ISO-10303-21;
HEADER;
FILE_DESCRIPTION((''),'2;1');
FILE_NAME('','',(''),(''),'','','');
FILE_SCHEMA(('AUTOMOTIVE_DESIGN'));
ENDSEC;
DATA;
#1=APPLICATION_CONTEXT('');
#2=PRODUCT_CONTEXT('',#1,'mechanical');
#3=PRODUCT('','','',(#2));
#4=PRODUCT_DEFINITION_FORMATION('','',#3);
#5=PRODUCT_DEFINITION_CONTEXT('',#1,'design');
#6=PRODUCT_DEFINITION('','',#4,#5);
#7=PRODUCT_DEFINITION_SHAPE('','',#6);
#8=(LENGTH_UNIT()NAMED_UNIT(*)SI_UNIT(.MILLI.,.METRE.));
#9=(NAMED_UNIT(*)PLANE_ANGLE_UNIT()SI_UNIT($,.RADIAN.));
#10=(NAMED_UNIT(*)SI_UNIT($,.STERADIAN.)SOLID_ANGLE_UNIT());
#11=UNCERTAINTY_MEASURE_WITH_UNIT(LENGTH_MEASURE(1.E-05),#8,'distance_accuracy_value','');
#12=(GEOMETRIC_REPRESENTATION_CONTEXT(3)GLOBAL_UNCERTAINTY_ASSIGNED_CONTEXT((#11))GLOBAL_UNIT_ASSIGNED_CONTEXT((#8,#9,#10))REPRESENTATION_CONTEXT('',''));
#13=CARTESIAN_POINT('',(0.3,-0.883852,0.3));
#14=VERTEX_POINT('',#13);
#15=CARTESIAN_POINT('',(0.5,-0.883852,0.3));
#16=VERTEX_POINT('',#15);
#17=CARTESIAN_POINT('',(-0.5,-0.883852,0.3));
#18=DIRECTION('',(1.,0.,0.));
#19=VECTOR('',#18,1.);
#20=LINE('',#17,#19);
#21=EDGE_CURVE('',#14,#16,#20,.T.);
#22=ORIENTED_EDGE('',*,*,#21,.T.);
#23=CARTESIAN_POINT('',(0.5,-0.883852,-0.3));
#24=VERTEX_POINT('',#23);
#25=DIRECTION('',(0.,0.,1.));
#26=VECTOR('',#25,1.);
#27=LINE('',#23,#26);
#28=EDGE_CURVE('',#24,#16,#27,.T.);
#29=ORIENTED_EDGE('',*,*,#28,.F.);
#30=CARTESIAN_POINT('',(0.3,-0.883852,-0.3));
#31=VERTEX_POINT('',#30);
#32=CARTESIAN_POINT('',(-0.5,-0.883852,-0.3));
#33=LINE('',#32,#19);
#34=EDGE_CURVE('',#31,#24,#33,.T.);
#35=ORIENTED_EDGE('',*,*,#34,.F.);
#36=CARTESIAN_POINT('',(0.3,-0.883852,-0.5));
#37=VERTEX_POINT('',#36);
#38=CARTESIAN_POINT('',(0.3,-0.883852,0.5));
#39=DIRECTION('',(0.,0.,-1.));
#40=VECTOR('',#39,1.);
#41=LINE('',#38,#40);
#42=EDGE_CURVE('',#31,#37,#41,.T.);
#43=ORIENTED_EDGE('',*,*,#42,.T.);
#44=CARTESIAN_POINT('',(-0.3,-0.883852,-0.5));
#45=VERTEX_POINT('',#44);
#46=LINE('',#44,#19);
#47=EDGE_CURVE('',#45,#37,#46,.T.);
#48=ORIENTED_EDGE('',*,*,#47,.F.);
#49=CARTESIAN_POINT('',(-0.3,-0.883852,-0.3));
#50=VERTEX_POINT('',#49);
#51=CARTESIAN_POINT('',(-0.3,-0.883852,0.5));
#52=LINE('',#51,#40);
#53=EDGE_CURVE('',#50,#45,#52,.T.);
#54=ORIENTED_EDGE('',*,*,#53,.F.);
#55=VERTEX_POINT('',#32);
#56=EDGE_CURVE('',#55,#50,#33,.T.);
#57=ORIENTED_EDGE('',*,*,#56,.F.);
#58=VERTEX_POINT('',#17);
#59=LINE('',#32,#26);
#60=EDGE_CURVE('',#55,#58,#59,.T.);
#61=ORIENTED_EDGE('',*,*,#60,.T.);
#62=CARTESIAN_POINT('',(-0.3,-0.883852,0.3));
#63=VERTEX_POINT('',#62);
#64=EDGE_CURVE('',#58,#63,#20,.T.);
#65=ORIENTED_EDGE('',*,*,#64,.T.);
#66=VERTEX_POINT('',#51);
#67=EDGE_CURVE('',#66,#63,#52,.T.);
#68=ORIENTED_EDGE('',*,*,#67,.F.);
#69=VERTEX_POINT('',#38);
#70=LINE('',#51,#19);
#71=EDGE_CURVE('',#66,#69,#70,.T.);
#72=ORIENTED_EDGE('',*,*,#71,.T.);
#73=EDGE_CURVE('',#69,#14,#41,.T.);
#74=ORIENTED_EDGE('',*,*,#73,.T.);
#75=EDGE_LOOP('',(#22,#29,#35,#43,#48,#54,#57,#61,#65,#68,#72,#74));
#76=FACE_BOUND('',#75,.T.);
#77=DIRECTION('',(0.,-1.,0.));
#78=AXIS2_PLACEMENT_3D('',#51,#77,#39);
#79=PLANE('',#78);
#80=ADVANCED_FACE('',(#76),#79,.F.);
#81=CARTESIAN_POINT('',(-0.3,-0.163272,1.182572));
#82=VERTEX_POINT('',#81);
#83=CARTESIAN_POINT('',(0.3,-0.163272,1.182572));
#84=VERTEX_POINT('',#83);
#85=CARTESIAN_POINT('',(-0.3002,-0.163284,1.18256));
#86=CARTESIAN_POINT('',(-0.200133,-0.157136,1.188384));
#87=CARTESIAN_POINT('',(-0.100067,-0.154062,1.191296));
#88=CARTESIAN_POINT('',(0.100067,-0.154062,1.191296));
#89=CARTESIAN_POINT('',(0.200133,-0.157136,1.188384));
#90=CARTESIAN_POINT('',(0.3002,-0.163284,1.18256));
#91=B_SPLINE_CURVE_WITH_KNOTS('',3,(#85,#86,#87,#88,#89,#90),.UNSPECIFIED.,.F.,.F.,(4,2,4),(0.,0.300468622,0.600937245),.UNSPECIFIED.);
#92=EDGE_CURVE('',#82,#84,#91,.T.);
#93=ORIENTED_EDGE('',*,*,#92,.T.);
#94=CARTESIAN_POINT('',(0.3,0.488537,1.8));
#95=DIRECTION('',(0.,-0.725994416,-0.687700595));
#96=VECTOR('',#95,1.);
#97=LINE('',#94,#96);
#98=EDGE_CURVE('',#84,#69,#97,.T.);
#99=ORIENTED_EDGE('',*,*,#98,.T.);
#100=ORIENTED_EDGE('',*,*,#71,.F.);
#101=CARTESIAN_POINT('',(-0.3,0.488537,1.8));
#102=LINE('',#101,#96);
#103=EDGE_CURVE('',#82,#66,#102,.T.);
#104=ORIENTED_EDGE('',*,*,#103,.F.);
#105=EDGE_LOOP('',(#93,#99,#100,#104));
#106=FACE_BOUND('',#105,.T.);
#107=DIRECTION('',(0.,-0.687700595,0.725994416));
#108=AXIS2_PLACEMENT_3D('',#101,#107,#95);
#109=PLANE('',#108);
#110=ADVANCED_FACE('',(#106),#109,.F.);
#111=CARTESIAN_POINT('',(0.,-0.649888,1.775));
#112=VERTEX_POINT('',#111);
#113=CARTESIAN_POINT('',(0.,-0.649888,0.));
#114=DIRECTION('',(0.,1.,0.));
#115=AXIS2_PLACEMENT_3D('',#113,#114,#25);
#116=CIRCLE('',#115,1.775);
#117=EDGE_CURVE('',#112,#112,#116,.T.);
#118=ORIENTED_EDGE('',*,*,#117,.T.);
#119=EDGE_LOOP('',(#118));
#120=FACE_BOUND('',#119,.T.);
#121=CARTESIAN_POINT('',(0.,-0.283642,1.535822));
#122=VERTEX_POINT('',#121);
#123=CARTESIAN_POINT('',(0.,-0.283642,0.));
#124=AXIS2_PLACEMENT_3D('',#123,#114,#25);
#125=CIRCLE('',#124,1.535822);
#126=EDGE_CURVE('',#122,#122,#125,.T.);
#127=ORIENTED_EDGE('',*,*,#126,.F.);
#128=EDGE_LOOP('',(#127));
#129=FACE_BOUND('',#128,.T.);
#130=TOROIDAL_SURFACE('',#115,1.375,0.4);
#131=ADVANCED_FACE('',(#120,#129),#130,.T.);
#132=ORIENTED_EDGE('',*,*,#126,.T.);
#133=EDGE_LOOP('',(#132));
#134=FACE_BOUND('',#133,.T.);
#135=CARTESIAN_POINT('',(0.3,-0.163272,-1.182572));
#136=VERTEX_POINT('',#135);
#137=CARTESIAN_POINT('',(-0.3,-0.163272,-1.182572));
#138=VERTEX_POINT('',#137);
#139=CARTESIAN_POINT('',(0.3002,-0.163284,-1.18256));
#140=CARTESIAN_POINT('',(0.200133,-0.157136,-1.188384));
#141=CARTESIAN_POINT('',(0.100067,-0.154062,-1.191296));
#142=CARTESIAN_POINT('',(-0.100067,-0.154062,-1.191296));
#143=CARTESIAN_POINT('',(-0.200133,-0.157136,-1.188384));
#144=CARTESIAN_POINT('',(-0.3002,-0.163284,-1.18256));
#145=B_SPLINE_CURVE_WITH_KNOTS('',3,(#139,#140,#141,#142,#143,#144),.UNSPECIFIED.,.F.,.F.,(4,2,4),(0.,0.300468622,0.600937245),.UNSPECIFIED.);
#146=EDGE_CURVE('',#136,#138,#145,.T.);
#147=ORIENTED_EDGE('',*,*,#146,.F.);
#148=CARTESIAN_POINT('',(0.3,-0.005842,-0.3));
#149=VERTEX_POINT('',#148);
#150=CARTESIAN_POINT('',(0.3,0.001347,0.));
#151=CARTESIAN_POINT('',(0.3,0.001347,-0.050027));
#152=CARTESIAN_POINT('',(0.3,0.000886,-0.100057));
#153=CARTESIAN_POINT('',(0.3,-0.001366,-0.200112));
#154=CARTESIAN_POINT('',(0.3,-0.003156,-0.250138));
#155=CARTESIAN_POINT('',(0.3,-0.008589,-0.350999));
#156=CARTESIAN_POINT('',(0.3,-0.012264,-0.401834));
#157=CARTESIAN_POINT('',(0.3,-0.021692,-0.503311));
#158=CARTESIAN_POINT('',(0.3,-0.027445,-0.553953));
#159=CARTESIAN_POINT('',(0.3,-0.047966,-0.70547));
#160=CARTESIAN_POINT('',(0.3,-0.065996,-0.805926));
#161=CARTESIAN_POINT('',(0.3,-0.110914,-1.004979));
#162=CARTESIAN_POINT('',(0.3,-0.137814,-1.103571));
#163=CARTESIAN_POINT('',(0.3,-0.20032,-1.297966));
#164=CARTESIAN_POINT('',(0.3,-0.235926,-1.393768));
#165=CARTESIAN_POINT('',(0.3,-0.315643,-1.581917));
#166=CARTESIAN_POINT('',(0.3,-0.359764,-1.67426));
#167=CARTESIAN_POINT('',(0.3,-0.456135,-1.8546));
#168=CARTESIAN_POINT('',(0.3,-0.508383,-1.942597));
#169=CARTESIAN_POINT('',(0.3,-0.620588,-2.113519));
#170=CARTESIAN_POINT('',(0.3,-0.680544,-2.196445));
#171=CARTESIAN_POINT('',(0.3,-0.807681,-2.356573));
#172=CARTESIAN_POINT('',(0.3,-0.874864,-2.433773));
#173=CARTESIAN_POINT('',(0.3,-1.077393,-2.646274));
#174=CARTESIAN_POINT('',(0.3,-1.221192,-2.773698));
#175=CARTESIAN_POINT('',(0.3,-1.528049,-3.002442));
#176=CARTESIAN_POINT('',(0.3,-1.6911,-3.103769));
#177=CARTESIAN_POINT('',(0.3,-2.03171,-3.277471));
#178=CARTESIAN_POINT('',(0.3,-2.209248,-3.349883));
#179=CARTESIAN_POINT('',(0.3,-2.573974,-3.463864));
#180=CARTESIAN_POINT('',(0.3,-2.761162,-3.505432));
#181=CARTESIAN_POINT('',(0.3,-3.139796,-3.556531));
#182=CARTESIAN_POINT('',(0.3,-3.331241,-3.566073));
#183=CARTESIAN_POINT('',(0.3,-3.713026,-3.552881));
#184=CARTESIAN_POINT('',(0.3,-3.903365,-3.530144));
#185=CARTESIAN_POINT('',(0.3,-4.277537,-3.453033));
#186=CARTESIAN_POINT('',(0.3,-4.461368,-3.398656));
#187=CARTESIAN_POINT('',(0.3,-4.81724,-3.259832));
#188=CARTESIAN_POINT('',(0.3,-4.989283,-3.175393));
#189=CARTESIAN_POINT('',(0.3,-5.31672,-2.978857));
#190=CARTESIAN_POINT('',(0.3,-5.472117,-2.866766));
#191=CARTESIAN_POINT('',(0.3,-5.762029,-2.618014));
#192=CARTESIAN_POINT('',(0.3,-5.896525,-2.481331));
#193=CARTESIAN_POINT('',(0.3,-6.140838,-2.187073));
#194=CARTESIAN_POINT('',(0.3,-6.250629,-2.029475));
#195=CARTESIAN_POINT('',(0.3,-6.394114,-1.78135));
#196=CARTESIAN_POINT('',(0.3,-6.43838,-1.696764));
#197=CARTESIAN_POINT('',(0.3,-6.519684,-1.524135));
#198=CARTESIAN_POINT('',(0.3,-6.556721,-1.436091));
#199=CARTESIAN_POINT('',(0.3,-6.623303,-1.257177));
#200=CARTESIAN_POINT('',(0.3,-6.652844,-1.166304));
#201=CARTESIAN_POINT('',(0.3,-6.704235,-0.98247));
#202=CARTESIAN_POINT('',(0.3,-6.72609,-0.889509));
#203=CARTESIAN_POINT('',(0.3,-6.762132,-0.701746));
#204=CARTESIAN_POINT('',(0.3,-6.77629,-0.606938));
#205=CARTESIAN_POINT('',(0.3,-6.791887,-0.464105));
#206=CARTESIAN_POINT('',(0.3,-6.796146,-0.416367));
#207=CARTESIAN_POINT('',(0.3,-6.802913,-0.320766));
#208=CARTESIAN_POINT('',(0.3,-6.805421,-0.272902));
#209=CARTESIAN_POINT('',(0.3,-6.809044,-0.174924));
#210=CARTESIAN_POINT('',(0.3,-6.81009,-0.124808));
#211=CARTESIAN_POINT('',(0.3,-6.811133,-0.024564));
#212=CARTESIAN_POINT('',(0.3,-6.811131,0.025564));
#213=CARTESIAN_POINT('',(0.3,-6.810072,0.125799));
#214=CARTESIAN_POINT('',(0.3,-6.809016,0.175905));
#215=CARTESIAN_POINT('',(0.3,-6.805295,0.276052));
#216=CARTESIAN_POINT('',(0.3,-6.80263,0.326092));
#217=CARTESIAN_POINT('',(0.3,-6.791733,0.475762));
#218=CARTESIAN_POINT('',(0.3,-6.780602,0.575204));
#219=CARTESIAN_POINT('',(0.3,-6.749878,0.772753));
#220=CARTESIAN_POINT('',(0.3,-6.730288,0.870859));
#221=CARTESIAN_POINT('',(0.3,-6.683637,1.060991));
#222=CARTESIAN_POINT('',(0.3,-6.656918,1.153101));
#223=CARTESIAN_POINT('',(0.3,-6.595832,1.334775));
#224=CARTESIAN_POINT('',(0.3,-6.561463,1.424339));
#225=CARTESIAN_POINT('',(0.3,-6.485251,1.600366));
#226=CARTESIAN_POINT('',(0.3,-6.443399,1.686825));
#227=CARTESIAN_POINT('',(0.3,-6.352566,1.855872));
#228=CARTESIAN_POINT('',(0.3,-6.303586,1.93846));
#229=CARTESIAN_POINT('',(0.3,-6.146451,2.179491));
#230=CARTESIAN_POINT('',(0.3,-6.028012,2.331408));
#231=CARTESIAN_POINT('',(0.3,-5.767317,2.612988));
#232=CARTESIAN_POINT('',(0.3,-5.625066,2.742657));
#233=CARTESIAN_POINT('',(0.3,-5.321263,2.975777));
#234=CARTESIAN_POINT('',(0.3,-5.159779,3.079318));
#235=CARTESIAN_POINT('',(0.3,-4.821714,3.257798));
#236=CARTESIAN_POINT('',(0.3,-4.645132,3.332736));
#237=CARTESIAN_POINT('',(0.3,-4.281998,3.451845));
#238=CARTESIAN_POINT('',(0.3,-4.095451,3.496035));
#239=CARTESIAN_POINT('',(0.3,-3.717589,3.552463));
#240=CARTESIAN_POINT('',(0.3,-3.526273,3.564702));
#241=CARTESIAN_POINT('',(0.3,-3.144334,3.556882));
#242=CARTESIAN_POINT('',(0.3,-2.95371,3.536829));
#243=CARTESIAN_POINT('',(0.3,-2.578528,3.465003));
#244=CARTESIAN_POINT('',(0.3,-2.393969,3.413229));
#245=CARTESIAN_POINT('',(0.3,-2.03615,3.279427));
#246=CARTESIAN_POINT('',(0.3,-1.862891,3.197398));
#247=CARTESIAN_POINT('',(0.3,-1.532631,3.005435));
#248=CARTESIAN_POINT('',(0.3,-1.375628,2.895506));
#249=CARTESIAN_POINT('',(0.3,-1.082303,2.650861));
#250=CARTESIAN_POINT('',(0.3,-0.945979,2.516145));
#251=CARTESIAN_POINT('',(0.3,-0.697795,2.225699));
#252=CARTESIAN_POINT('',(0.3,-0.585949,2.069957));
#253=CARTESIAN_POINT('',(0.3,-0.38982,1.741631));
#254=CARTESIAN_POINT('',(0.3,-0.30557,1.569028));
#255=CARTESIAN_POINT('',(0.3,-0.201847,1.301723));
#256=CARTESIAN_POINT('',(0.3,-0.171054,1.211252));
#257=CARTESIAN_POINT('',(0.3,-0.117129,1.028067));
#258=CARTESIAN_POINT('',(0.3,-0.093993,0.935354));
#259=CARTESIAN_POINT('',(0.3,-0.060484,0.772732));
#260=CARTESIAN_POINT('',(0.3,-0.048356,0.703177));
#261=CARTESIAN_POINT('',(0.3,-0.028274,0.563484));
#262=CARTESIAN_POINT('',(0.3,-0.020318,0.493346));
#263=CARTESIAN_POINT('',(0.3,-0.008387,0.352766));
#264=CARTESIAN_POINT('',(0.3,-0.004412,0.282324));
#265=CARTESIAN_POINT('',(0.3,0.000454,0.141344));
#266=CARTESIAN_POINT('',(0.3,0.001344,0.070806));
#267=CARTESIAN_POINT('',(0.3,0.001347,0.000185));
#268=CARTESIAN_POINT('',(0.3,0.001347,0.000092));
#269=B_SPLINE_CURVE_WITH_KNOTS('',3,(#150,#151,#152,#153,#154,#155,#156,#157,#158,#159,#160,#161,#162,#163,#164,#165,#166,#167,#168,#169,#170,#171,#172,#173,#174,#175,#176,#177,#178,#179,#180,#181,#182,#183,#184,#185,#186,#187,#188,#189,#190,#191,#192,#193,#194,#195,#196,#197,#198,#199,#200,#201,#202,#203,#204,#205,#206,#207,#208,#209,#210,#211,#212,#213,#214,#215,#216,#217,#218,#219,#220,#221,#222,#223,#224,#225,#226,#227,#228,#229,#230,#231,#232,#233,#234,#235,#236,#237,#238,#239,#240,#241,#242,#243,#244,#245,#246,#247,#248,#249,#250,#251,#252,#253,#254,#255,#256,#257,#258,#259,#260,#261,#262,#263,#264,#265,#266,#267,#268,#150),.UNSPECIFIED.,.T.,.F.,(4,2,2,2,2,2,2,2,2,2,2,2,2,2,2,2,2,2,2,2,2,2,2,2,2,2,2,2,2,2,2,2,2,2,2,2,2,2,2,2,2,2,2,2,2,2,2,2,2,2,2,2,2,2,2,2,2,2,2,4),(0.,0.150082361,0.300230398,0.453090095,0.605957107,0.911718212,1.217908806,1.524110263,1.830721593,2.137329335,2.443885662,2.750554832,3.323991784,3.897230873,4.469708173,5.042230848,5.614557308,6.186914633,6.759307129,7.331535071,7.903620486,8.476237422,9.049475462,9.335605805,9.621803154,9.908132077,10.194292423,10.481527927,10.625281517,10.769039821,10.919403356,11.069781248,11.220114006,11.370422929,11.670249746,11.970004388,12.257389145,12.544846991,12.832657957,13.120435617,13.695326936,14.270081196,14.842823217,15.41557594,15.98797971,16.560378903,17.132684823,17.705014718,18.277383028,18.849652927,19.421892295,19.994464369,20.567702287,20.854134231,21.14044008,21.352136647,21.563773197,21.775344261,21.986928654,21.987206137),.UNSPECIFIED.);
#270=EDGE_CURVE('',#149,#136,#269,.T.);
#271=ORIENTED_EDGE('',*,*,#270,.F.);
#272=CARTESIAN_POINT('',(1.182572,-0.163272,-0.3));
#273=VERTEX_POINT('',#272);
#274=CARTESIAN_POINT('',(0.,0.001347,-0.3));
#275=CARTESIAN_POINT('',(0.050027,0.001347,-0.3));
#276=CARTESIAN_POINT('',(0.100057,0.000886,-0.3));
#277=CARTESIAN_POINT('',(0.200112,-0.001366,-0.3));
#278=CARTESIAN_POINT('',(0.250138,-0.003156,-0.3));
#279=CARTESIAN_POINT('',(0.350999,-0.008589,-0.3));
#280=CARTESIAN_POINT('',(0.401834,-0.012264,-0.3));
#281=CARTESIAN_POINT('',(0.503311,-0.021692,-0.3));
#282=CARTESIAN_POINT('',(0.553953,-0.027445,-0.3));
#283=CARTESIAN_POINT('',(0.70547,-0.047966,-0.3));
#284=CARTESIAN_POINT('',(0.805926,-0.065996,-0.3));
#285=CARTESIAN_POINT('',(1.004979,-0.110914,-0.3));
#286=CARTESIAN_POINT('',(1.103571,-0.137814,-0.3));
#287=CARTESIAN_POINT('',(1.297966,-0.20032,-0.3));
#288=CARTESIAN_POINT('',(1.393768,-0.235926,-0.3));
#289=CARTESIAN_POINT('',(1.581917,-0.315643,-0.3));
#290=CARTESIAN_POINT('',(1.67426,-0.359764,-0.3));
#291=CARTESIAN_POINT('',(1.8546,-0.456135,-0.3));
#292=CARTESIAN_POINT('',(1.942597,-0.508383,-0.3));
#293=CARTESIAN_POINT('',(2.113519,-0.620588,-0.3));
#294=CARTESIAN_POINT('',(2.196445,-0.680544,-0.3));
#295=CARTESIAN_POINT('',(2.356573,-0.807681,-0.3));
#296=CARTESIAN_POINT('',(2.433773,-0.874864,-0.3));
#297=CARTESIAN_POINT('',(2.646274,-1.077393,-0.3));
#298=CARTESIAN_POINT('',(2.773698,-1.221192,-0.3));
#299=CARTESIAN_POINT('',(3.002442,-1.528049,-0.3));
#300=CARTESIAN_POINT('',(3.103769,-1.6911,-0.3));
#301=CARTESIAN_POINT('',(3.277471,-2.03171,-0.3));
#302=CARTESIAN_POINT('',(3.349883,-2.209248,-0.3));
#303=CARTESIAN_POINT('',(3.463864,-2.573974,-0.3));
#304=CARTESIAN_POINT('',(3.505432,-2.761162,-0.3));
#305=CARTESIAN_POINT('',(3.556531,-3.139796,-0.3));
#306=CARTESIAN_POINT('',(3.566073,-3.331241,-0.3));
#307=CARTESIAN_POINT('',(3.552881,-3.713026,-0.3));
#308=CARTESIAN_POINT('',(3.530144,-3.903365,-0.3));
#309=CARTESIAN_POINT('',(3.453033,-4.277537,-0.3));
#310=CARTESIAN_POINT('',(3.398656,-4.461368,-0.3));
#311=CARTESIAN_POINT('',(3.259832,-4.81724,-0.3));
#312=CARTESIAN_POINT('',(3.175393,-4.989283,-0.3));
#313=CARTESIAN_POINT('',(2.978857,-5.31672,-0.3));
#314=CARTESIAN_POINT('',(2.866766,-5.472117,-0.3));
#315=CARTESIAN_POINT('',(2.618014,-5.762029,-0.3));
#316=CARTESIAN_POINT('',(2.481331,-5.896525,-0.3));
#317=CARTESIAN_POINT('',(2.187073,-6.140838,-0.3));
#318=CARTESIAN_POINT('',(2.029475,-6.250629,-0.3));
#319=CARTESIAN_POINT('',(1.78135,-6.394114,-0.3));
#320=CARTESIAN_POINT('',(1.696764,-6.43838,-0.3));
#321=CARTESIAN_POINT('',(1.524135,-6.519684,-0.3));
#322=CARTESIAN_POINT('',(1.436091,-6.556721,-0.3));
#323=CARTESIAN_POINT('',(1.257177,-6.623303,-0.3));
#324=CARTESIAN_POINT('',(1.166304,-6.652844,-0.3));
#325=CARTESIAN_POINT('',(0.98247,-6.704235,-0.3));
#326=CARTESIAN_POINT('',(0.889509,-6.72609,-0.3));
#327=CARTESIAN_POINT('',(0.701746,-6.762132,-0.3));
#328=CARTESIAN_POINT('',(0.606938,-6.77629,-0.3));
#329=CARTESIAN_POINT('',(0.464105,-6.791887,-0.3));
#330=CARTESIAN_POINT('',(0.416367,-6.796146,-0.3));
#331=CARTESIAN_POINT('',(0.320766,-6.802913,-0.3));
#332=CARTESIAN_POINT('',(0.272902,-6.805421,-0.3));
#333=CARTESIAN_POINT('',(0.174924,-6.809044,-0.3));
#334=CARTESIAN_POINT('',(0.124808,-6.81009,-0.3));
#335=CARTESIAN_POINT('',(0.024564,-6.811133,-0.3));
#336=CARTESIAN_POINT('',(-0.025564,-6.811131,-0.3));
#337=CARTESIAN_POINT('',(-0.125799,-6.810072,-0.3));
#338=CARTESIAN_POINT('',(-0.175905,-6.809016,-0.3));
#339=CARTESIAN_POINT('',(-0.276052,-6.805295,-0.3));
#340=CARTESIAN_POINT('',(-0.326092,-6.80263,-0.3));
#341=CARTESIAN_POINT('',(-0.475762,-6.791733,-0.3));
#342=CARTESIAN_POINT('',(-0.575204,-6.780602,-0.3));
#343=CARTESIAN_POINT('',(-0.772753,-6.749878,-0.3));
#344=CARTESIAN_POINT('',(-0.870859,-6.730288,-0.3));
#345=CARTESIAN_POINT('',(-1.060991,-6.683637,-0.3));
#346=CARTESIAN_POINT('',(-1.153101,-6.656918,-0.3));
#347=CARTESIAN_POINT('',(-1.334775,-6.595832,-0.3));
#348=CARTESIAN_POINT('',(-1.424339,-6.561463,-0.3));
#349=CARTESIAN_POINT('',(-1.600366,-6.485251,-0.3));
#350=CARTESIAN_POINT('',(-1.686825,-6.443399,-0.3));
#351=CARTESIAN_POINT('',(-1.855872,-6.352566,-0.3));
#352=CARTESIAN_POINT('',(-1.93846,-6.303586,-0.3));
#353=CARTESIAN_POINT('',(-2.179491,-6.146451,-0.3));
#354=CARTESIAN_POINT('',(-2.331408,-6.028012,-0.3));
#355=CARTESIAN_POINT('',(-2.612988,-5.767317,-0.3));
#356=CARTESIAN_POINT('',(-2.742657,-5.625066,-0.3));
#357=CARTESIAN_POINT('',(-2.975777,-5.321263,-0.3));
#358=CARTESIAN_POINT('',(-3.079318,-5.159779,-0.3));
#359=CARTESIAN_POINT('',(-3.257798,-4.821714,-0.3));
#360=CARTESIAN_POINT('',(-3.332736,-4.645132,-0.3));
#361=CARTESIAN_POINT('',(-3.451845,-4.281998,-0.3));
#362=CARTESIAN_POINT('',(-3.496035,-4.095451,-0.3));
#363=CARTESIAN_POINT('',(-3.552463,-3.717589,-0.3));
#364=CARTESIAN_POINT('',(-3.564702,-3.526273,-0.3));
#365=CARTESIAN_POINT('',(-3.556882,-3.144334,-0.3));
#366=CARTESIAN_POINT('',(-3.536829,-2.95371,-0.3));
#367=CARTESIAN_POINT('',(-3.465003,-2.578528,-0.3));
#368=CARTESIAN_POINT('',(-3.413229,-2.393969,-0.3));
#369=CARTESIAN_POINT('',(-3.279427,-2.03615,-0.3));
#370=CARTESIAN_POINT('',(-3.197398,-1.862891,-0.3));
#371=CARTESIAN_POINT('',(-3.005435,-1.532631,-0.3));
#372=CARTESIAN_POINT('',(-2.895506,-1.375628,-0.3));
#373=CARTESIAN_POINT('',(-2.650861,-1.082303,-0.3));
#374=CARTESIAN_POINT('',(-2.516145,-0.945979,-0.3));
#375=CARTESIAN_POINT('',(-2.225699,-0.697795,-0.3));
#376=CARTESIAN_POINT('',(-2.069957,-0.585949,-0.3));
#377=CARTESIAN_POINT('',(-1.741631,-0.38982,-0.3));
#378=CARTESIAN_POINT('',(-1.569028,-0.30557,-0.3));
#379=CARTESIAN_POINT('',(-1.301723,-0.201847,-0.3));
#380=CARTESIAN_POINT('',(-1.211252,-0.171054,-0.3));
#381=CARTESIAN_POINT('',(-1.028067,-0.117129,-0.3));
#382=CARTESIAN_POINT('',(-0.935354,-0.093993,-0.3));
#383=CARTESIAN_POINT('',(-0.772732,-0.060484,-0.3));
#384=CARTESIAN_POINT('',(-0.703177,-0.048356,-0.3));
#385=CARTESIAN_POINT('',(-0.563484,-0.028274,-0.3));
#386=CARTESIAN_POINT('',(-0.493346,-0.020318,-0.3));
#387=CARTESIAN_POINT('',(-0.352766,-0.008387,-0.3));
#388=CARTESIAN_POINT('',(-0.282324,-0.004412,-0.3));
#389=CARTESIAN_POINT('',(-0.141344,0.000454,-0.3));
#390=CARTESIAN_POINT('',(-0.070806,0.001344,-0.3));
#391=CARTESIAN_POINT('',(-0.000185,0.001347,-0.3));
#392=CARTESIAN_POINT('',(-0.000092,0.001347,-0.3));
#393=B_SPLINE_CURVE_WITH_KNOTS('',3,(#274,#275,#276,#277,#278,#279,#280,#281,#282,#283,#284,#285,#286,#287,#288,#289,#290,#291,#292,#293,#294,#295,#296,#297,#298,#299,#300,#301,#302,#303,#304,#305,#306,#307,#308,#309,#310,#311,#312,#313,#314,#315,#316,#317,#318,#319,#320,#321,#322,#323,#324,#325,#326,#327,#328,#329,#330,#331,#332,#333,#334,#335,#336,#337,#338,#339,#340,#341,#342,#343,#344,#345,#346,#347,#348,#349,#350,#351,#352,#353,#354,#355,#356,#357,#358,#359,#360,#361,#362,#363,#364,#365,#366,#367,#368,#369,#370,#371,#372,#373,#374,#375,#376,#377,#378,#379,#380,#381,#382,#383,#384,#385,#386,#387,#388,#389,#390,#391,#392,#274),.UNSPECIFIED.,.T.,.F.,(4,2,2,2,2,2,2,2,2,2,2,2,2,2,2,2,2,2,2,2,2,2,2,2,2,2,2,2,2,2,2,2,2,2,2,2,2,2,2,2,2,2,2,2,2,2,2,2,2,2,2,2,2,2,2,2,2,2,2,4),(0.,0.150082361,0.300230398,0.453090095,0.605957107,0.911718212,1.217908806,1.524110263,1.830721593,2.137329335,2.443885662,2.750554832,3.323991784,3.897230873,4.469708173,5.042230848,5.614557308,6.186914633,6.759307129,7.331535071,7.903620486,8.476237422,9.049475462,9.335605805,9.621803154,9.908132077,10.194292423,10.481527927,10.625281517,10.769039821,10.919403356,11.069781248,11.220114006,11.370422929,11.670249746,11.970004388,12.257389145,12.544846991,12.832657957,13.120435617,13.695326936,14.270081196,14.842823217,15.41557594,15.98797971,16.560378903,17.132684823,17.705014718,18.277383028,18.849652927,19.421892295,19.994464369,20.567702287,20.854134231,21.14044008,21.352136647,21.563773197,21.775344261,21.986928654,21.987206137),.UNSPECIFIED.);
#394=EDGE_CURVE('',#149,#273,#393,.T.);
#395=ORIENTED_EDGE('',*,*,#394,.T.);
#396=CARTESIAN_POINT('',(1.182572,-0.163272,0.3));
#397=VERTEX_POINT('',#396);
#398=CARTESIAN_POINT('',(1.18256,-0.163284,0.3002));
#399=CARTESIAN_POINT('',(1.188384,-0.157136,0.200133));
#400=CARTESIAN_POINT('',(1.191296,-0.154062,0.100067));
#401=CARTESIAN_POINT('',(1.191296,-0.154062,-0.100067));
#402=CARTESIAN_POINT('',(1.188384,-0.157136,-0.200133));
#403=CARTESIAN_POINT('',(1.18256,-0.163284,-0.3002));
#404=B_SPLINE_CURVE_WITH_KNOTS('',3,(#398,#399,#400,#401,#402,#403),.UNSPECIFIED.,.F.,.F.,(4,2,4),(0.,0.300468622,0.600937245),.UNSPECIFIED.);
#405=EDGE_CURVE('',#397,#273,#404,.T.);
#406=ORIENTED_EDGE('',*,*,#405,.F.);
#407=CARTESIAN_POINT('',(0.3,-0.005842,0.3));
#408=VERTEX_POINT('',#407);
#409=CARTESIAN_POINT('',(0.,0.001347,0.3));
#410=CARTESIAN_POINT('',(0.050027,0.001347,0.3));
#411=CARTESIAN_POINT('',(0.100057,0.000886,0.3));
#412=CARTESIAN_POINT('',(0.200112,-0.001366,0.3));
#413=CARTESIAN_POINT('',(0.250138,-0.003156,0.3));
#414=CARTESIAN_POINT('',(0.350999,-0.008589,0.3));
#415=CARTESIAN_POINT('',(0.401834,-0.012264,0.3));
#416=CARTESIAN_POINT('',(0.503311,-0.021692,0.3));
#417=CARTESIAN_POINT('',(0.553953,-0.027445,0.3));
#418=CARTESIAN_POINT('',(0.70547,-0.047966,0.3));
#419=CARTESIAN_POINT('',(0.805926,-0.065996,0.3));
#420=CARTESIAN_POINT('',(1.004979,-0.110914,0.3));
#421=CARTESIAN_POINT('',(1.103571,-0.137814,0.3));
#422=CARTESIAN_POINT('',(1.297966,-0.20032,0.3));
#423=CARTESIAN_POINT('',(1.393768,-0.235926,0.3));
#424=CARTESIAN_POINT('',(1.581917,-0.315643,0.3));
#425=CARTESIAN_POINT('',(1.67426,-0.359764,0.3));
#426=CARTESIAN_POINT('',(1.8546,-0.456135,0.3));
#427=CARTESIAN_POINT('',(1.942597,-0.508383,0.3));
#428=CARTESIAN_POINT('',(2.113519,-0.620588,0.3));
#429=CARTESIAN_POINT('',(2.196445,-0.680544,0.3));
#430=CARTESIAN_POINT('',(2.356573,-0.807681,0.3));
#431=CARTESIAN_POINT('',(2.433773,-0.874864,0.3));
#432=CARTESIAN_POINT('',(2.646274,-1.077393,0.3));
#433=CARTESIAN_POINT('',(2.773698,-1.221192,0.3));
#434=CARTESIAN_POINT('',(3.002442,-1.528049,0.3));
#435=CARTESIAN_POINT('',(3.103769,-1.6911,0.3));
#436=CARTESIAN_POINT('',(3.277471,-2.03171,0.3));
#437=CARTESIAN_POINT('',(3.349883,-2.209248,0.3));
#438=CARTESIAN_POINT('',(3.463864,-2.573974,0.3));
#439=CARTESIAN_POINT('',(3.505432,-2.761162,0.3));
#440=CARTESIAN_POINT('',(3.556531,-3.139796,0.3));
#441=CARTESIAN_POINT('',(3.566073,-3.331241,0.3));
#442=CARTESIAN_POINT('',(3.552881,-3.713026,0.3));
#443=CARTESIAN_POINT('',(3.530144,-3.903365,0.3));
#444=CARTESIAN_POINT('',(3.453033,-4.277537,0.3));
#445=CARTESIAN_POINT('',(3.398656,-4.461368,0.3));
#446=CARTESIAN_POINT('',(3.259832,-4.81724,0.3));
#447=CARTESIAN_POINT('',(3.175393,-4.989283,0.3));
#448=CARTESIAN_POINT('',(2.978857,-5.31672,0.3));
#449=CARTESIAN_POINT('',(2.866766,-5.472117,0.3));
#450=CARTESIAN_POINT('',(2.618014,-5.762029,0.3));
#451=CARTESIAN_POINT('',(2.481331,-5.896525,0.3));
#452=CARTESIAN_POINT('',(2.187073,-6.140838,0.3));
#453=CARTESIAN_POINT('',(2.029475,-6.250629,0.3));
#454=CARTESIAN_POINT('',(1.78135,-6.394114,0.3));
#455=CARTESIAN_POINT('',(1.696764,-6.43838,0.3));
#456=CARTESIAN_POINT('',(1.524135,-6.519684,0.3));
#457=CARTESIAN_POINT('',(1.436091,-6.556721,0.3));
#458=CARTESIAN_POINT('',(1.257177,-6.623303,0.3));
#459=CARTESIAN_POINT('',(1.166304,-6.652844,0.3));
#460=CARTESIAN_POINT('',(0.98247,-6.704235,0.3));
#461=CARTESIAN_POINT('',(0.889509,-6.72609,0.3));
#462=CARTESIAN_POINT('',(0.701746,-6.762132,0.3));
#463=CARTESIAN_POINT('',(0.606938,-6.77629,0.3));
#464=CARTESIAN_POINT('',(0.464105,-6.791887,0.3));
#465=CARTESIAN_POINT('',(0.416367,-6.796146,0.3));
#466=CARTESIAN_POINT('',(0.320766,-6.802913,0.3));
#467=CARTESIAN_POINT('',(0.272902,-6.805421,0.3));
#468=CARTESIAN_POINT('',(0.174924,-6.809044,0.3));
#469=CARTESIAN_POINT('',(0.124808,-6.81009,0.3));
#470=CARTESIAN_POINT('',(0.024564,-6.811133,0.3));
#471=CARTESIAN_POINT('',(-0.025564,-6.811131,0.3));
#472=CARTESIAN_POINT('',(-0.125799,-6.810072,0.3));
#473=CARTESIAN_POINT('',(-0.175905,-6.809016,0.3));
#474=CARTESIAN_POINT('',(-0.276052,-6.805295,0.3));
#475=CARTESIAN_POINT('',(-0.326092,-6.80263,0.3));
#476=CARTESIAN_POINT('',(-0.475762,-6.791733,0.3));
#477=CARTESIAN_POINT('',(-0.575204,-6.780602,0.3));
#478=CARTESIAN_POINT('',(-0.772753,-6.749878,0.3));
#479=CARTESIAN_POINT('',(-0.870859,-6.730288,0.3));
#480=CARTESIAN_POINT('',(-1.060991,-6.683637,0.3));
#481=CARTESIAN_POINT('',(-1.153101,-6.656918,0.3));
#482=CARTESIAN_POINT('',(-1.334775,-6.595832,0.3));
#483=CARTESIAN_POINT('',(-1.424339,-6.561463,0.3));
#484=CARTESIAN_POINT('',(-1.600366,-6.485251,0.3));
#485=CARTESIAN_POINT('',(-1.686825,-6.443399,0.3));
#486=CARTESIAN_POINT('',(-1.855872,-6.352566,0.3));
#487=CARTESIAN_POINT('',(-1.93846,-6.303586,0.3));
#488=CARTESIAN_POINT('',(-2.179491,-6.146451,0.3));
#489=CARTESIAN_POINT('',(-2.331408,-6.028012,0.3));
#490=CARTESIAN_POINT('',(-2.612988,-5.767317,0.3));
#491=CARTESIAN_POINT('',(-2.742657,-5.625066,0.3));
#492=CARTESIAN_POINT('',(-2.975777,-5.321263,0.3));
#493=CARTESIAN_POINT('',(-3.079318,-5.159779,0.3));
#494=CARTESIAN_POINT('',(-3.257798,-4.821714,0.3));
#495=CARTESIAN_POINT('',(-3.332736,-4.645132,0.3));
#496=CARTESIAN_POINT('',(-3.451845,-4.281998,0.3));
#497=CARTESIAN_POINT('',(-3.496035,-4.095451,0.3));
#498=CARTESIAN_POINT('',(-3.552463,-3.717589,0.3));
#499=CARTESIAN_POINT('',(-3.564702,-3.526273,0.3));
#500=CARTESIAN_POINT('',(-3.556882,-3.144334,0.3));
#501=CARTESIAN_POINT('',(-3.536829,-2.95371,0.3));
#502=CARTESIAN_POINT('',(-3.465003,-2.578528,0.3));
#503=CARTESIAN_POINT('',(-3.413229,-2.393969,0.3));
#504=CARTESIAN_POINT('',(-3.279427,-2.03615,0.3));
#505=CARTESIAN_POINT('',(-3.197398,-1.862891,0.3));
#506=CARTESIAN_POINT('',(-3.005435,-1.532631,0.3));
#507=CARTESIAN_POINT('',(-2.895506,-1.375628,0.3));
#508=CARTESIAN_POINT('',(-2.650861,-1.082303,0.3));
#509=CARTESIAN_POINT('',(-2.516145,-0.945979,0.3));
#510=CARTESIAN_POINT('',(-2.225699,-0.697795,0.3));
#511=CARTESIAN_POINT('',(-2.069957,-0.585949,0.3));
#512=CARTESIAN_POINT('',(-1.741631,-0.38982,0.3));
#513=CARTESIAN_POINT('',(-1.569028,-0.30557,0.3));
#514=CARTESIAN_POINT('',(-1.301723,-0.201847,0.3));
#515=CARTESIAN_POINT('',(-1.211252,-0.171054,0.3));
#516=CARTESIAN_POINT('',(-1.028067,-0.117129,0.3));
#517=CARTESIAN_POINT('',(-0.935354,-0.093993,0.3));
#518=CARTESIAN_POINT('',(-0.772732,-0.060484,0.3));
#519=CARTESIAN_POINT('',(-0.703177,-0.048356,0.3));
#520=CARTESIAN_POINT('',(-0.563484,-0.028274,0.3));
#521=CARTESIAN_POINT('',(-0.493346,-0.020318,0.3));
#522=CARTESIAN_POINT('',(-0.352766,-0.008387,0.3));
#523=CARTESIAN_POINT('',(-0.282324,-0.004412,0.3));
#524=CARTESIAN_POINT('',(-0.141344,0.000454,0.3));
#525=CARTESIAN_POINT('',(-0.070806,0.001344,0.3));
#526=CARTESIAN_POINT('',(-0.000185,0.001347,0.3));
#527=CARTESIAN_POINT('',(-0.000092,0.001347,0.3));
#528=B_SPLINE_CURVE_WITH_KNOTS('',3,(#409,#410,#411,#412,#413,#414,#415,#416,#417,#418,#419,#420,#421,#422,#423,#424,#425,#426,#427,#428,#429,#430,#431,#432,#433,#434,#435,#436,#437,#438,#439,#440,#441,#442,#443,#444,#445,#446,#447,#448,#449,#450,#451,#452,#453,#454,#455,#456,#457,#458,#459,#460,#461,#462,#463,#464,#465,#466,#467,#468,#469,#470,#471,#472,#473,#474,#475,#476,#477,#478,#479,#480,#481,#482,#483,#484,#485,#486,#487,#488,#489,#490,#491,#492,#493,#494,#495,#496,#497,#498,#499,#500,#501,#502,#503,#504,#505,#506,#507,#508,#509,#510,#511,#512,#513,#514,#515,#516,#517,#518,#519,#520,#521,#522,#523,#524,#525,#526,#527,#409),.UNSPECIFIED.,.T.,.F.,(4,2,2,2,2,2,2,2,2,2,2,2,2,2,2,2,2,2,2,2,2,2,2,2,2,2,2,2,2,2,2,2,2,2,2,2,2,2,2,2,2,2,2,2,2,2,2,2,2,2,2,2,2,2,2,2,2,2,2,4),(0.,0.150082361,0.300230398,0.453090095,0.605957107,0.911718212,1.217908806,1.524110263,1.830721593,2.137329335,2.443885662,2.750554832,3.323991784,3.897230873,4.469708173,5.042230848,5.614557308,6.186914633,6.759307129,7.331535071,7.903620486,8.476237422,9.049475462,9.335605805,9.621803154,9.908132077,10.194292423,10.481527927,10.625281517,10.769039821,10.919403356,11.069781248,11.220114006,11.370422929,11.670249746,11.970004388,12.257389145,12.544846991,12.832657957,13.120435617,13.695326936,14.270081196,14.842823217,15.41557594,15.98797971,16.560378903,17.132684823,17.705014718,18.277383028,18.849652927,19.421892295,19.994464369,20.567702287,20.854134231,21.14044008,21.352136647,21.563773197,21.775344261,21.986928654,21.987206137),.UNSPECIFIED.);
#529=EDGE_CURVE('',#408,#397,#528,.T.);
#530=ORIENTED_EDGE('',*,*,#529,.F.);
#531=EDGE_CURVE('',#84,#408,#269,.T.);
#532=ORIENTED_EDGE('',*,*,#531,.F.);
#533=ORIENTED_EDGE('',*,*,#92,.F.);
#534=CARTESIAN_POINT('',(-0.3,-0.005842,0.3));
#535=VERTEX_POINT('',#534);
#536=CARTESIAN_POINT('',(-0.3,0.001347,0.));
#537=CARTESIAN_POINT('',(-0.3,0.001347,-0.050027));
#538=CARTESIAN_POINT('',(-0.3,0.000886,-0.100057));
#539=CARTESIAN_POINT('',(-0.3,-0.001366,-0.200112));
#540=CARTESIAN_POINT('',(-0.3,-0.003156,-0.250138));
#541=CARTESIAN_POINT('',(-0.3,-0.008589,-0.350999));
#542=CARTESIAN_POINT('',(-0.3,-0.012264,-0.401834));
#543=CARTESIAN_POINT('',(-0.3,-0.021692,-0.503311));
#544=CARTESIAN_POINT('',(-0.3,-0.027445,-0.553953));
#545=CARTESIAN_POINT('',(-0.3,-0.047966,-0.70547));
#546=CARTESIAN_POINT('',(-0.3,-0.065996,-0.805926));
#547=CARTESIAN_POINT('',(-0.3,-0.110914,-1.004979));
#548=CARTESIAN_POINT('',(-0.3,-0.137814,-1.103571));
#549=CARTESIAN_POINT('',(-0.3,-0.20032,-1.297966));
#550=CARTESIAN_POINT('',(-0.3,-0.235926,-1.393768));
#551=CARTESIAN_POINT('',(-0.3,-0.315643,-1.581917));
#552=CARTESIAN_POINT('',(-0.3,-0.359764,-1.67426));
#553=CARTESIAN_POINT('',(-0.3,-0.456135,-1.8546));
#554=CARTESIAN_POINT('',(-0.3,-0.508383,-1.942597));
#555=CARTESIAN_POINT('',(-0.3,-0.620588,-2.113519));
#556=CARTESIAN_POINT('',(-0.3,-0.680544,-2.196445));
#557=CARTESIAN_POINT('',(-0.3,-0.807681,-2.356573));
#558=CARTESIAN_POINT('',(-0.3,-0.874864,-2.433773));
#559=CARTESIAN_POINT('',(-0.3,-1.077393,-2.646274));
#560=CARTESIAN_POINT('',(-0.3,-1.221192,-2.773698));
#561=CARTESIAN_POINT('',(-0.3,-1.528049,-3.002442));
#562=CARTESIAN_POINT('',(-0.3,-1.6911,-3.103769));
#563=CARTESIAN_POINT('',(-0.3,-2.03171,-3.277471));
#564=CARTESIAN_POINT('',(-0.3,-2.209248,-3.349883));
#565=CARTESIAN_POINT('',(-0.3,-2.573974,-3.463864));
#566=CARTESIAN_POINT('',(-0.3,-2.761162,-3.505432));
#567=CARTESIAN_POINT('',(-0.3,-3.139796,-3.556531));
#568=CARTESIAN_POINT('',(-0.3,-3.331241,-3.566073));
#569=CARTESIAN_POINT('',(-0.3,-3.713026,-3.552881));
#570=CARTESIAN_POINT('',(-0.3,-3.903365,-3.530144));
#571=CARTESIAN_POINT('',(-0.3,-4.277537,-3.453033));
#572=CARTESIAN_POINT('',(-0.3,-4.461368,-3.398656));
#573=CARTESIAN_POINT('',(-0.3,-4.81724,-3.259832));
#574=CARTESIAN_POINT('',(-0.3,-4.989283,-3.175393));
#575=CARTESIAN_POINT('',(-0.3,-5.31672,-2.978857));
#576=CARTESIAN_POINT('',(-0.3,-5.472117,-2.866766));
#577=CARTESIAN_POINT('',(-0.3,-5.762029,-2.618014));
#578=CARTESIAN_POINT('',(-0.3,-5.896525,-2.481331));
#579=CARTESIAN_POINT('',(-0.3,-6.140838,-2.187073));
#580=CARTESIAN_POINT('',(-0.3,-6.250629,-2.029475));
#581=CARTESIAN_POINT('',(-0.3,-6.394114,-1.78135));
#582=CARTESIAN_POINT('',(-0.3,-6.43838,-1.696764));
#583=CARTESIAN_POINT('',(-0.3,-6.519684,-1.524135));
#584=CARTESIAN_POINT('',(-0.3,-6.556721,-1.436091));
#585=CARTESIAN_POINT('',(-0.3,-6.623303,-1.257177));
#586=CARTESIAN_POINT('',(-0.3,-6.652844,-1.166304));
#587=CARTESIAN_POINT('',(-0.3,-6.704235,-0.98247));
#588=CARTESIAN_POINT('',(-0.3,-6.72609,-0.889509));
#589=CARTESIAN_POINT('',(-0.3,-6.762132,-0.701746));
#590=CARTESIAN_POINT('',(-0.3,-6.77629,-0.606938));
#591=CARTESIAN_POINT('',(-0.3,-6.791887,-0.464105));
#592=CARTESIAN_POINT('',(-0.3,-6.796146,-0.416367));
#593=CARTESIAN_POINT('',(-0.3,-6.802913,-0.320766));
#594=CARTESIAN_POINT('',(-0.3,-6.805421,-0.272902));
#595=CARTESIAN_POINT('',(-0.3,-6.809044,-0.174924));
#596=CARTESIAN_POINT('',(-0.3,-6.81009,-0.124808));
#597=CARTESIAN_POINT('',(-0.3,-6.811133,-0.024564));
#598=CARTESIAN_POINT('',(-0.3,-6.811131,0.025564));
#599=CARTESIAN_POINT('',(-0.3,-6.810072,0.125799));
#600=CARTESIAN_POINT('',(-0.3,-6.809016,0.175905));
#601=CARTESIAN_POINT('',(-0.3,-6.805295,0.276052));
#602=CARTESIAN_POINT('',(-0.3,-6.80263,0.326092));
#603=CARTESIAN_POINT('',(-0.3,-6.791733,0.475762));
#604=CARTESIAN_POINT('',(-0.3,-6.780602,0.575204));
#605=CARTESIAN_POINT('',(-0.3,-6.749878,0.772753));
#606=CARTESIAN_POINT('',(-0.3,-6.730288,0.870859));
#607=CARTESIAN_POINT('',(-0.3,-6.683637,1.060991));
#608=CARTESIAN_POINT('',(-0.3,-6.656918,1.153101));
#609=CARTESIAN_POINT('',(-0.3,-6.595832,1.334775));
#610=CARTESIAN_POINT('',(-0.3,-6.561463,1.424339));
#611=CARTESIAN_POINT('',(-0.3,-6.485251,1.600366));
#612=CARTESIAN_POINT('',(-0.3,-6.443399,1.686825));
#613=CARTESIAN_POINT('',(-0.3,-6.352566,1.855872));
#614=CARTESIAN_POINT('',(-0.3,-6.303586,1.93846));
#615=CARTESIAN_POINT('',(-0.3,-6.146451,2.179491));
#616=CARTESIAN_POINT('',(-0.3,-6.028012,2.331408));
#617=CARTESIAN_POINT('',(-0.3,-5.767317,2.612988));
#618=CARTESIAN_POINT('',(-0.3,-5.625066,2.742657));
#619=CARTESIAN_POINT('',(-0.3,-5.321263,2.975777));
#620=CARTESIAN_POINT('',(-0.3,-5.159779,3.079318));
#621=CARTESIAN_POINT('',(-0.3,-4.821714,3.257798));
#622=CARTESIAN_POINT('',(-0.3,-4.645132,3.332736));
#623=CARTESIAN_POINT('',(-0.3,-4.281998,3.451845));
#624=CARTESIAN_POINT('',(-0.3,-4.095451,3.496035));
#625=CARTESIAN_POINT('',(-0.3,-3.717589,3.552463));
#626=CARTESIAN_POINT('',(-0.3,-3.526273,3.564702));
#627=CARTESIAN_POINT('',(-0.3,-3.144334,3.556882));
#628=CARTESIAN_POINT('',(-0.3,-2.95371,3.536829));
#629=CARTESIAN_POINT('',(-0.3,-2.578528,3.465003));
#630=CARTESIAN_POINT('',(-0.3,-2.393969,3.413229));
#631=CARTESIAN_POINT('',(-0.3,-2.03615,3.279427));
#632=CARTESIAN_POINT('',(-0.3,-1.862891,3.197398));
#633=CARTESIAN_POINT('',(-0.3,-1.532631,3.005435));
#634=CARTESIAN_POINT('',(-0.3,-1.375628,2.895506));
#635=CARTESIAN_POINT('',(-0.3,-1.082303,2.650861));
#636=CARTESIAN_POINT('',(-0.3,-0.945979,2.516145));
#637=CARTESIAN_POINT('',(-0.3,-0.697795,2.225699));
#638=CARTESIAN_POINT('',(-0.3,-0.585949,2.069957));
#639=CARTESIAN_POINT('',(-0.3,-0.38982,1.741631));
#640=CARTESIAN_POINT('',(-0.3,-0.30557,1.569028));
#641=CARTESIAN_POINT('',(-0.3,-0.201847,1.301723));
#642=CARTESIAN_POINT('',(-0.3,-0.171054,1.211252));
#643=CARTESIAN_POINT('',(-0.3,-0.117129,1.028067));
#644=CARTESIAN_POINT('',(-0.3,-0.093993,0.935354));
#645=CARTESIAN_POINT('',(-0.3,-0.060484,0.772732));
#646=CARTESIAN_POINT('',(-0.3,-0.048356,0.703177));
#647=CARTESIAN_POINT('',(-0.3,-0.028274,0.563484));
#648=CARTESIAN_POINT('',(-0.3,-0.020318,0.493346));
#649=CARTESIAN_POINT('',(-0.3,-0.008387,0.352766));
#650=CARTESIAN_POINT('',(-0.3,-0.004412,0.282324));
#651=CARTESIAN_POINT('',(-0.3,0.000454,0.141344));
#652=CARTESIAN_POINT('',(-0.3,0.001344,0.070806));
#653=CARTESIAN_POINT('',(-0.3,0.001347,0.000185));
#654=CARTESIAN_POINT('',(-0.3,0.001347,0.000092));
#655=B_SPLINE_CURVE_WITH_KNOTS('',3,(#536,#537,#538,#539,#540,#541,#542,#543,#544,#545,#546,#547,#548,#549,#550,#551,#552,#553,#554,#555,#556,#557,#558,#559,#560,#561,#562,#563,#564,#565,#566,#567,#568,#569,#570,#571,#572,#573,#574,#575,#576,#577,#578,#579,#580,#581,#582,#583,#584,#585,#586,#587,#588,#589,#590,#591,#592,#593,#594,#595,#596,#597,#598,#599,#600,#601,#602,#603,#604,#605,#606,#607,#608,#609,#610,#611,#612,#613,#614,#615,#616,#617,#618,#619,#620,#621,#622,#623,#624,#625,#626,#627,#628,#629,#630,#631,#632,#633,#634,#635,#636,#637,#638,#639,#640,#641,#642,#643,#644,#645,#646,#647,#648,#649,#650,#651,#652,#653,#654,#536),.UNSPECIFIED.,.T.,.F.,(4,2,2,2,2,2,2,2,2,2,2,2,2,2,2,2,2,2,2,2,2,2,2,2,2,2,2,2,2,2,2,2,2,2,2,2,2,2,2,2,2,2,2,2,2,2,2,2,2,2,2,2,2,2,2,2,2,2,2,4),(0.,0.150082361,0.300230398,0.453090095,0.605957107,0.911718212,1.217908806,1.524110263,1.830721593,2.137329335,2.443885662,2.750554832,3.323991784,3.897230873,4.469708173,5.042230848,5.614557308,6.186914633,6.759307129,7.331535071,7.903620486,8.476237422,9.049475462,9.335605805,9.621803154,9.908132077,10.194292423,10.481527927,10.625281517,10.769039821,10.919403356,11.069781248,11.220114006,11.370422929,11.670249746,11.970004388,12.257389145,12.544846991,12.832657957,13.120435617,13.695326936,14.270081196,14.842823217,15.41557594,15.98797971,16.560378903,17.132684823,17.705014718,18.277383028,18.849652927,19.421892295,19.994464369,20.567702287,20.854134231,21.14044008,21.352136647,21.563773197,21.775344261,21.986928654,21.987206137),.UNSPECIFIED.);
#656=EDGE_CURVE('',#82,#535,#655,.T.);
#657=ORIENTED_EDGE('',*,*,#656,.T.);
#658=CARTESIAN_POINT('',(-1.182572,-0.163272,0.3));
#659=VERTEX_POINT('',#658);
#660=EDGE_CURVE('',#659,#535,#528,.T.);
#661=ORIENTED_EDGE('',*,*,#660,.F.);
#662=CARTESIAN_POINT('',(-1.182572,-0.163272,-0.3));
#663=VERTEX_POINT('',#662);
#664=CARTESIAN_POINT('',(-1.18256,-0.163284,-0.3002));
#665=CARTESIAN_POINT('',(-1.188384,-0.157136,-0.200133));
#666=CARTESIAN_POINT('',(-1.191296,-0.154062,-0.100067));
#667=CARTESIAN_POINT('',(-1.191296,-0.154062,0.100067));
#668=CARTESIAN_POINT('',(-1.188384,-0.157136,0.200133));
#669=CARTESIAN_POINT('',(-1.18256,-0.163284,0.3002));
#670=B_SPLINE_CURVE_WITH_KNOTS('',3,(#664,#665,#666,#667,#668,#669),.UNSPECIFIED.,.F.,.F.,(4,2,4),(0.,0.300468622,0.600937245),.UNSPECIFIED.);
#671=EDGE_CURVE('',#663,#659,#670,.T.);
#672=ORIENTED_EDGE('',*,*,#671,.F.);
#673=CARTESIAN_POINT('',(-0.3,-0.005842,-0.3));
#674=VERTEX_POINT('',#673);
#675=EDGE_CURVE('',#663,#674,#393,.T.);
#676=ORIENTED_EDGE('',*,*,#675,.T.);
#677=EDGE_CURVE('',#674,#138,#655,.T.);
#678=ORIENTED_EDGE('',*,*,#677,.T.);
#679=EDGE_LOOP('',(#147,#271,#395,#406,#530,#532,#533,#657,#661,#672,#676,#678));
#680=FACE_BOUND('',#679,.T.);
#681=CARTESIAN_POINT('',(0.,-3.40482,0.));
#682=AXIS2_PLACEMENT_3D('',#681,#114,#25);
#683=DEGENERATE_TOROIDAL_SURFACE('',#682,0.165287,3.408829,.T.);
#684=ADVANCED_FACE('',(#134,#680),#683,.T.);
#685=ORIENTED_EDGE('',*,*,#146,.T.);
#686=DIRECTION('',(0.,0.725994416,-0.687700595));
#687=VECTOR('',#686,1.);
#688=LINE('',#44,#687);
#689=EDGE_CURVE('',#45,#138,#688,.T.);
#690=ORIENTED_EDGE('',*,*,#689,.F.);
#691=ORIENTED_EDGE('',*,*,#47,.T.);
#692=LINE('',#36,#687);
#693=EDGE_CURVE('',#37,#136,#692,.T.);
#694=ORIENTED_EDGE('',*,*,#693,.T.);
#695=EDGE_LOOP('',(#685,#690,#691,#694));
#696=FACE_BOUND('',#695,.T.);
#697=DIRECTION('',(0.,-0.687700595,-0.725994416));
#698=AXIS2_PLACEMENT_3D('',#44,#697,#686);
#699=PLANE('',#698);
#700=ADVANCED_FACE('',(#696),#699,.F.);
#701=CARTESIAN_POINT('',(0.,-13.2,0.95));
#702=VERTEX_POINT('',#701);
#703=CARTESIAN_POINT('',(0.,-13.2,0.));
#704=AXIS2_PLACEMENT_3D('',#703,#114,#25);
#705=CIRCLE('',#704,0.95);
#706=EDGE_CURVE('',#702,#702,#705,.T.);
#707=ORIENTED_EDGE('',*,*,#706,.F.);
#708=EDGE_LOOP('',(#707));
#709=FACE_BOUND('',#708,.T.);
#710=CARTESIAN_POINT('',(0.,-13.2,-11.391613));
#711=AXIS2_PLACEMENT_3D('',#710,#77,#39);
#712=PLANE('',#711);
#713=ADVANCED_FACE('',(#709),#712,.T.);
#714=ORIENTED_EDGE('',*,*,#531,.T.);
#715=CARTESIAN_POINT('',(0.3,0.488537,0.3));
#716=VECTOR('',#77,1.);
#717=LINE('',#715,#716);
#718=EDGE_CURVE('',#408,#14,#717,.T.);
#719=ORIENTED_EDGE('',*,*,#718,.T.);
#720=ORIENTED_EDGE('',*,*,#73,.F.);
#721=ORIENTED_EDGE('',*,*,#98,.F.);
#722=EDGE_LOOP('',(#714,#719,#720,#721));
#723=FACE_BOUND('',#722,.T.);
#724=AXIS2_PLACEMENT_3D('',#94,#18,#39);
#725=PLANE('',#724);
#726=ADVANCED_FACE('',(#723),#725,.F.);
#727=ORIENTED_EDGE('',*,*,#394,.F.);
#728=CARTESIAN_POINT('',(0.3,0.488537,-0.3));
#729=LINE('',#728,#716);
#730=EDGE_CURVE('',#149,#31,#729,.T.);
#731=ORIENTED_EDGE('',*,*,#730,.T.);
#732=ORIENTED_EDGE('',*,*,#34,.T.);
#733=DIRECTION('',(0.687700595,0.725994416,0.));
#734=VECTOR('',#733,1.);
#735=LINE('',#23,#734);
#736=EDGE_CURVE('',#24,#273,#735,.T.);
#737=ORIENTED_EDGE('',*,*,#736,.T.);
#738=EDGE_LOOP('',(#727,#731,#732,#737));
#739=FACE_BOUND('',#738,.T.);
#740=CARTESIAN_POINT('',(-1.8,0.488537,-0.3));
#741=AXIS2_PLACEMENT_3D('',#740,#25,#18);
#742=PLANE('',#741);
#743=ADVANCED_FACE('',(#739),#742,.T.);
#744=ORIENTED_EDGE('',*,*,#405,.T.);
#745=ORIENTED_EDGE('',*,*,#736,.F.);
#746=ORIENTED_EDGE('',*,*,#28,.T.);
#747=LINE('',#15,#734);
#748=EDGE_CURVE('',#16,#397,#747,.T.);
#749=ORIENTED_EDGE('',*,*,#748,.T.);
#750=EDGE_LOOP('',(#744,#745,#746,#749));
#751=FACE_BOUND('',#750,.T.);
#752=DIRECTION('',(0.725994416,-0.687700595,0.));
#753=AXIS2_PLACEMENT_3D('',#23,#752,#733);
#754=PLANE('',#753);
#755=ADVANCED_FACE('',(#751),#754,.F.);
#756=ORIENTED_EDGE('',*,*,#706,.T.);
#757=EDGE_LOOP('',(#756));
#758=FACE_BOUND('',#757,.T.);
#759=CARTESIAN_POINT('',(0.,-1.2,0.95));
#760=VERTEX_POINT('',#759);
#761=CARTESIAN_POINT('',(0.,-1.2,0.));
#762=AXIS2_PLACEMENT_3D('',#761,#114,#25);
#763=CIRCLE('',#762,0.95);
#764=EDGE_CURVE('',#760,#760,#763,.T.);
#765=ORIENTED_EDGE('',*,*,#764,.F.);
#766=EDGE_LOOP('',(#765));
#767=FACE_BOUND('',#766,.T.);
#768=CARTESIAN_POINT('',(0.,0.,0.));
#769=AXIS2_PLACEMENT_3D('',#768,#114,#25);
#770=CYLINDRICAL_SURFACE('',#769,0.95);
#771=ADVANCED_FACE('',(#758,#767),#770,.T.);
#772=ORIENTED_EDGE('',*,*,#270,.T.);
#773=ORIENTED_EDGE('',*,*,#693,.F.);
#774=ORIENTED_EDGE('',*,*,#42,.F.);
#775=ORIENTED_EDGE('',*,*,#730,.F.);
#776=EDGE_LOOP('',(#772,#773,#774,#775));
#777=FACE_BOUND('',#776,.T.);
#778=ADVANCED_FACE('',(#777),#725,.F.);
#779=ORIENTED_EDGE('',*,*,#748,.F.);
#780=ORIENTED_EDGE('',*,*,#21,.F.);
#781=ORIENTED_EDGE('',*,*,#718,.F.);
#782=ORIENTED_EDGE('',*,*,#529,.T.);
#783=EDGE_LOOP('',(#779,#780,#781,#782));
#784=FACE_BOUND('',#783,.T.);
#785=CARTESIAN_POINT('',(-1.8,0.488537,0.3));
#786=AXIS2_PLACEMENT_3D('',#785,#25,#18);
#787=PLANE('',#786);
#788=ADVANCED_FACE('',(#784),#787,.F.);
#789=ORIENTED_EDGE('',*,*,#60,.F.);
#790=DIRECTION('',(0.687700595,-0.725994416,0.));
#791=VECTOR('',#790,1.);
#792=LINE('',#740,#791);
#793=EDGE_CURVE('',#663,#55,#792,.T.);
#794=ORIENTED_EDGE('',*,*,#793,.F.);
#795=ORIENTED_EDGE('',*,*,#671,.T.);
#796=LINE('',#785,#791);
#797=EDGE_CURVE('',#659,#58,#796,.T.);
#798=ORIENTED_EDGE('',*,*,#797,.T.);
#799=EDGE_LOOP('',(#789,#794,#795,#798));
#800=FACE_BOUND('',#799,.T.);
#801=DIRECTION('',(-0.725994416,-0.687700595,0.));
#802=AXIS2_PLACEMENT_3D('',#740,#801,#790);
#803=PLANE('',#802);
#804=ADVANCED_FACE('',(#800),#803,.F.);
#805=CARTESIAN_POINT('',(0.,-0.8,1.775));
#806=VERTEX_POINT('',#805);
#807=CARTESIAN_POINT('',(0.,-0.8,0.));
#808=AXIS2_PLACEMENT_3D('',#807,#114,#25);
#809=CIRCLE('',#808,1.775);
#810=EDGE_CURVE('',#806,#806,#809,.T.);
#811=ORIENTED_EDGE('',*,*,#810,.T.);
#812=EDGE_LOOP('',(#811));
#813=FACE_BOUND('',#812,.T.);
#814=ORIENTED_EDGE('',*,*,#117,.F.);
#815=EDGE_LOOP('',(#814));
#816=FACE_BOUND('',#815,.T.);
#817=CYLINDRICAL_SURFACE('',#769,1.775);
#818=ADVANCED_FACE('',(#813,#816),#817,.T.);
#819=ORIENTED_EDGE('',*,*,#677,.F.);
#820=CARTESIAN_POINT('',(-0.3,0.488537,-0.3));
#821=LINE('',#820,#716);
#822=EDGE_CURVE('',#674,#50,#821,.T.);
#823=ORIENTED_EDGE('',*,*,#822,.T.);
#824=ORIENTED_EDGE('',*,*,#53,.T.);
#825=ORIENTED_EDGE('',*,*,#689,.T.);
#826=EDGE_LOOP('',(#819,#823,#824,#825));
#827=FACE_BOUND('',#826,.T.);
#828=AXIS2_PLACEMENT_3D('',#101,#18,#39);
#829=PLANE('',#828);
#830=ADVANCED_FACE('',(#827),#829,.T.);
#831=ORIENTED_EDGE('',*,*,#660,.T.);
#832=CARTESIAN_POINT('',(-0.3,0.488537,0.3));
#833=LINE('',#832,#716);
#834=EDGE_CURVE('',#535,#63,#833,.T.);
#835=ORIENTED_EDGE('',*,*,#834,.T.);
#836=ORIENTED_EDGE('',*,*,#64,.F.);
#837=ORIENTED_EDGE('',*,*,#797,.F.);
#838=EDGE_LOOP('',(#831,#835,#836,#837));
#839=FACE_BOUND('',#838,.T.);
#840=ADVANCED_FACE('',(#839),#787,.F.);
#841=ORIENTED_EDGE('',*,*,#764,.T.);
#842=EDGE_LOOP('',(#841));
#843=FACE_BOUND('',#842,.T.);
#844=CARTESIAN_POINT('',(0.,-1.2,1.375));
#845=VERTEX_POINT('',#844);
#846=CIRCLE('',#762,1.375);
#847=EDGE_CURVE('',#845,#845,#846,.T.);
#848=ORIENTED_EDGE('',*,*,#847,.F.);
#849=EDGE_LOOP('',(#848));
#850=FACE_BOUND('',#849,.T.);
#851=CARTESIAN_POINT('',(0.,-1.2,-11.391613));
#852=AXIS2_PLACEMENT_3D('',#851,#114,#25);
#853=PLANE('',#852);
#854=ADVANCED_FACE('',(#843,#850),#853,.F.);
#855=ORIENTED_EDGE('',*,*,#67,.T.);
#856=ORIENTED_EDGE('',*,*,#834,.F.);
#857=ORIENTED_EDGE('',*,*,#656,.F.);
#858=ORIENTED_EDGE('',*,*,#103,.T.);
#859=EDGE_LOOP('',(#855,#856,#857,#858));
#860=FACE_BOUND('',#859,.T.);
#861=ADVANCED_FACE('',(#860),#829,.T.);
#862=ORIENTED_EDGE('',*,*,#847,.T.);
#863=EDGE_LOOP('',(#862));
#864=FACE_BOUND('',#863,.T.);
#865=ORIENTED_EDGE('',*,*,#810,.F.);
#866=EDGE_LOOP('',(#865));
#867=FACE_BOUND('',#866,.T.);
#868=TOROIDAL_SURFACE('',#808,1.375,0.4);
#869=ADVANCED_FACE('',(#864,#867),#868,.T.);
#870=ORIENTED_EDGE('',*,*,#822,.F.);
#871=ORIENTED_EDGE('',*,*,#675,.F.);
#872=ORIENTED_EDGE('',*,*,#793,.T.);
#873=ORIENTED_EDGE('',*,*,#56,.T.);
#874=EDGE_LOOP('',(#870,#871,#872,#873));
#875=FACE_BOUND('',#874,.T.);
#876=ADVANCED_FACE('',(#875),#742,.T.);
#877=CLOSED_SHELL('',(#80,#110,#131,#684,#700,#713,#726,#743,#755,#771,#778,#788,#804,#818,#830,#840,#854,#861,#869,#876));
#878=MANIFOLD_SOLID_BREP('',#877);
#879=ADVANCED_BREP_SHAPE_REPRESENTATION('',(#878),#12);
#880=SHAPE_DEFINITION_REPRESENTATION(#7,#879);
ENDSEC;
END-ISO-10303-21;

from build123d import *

# Parameters (mm, degrees)
CUT_EXTRUDE_1_DEPTH      = 0.3
PATTERN_CIRCULAR_1_COUNT = 2
PATTERN_CIRCULAR_1_ANGLE = 90


with BuildPart() as part:
    # 草图1 → 旋转3 (revolve)
    with BuildSketch(Plane(origin=(0, 0, 0), x_dir=(0, 0, -1), z_dir=(1, 0, 0)), mode=Mode.PRIVATE) as revolve_3_sk:
        with BuildLine():
            ThreePointArc((1.375, -1.2), (1.657842712, -1.082842712), (1.775, -0.8))
            Line((1.775, -0.8), (1.775, -0.649888064))
            ThreePointArc((1.775, -0.649888064), (1.709909462, -0.431174433), (1.535821739, -0.283641742))
            ThreePointArc((1.535821739, -0.283641742), (0.784373982, -0.052678823), (0, 0))
            Line((0, 0), (0, -13.2))
            Line((0, -13.2), (0.95, -13.2))
            Line((0.95, -13.2), (0.95, -1.2))
            Line((0.95, -1.2), (1.375, -1.2))
        make_face()
    revolve(revolve_3_sk.sketch.rotate(Axis((0, 0, 0), (0, -1, 0)), 180), axis=Axis((0, 0, 0), (0, -1, 0)))

    # 草图5 → 切除-拉伸1 (cut, symmetric)
    with BuildSketch(Plane(origin=(0, 0, 0), x_dir=(0, 0, -1), z_dir=(1, 0, 0))):
        Polygon((-1.8, 0.488536713), (-0.5, -0.8838523), (0.5, -0.8838523), (1.8, 0.488536713), align=None)
    cut_extrude_1 = extrude(amount=CUT_EXTRUDE_1_DEPTH, both=True, mode=Mode.SUBTRACT)

    # 阵列(圆周)1: 切除-拉伸1 ×2 about axis
    pattern_circular_1_axis = Axis((0, 0, 0), (0, -1, 0))
    for i in range(1, PATTERN_CIRCULAR_1_COUNT):
        add(cut_extrude_1.rotate(pattern_circular_1_axis, i * PATTERN_CIRCULAR_1_ANGLE / (PATTERN_CIRCULAR_1_COUNT - 1)), mode=Mode.SUBTRACT)


solid = part.part
